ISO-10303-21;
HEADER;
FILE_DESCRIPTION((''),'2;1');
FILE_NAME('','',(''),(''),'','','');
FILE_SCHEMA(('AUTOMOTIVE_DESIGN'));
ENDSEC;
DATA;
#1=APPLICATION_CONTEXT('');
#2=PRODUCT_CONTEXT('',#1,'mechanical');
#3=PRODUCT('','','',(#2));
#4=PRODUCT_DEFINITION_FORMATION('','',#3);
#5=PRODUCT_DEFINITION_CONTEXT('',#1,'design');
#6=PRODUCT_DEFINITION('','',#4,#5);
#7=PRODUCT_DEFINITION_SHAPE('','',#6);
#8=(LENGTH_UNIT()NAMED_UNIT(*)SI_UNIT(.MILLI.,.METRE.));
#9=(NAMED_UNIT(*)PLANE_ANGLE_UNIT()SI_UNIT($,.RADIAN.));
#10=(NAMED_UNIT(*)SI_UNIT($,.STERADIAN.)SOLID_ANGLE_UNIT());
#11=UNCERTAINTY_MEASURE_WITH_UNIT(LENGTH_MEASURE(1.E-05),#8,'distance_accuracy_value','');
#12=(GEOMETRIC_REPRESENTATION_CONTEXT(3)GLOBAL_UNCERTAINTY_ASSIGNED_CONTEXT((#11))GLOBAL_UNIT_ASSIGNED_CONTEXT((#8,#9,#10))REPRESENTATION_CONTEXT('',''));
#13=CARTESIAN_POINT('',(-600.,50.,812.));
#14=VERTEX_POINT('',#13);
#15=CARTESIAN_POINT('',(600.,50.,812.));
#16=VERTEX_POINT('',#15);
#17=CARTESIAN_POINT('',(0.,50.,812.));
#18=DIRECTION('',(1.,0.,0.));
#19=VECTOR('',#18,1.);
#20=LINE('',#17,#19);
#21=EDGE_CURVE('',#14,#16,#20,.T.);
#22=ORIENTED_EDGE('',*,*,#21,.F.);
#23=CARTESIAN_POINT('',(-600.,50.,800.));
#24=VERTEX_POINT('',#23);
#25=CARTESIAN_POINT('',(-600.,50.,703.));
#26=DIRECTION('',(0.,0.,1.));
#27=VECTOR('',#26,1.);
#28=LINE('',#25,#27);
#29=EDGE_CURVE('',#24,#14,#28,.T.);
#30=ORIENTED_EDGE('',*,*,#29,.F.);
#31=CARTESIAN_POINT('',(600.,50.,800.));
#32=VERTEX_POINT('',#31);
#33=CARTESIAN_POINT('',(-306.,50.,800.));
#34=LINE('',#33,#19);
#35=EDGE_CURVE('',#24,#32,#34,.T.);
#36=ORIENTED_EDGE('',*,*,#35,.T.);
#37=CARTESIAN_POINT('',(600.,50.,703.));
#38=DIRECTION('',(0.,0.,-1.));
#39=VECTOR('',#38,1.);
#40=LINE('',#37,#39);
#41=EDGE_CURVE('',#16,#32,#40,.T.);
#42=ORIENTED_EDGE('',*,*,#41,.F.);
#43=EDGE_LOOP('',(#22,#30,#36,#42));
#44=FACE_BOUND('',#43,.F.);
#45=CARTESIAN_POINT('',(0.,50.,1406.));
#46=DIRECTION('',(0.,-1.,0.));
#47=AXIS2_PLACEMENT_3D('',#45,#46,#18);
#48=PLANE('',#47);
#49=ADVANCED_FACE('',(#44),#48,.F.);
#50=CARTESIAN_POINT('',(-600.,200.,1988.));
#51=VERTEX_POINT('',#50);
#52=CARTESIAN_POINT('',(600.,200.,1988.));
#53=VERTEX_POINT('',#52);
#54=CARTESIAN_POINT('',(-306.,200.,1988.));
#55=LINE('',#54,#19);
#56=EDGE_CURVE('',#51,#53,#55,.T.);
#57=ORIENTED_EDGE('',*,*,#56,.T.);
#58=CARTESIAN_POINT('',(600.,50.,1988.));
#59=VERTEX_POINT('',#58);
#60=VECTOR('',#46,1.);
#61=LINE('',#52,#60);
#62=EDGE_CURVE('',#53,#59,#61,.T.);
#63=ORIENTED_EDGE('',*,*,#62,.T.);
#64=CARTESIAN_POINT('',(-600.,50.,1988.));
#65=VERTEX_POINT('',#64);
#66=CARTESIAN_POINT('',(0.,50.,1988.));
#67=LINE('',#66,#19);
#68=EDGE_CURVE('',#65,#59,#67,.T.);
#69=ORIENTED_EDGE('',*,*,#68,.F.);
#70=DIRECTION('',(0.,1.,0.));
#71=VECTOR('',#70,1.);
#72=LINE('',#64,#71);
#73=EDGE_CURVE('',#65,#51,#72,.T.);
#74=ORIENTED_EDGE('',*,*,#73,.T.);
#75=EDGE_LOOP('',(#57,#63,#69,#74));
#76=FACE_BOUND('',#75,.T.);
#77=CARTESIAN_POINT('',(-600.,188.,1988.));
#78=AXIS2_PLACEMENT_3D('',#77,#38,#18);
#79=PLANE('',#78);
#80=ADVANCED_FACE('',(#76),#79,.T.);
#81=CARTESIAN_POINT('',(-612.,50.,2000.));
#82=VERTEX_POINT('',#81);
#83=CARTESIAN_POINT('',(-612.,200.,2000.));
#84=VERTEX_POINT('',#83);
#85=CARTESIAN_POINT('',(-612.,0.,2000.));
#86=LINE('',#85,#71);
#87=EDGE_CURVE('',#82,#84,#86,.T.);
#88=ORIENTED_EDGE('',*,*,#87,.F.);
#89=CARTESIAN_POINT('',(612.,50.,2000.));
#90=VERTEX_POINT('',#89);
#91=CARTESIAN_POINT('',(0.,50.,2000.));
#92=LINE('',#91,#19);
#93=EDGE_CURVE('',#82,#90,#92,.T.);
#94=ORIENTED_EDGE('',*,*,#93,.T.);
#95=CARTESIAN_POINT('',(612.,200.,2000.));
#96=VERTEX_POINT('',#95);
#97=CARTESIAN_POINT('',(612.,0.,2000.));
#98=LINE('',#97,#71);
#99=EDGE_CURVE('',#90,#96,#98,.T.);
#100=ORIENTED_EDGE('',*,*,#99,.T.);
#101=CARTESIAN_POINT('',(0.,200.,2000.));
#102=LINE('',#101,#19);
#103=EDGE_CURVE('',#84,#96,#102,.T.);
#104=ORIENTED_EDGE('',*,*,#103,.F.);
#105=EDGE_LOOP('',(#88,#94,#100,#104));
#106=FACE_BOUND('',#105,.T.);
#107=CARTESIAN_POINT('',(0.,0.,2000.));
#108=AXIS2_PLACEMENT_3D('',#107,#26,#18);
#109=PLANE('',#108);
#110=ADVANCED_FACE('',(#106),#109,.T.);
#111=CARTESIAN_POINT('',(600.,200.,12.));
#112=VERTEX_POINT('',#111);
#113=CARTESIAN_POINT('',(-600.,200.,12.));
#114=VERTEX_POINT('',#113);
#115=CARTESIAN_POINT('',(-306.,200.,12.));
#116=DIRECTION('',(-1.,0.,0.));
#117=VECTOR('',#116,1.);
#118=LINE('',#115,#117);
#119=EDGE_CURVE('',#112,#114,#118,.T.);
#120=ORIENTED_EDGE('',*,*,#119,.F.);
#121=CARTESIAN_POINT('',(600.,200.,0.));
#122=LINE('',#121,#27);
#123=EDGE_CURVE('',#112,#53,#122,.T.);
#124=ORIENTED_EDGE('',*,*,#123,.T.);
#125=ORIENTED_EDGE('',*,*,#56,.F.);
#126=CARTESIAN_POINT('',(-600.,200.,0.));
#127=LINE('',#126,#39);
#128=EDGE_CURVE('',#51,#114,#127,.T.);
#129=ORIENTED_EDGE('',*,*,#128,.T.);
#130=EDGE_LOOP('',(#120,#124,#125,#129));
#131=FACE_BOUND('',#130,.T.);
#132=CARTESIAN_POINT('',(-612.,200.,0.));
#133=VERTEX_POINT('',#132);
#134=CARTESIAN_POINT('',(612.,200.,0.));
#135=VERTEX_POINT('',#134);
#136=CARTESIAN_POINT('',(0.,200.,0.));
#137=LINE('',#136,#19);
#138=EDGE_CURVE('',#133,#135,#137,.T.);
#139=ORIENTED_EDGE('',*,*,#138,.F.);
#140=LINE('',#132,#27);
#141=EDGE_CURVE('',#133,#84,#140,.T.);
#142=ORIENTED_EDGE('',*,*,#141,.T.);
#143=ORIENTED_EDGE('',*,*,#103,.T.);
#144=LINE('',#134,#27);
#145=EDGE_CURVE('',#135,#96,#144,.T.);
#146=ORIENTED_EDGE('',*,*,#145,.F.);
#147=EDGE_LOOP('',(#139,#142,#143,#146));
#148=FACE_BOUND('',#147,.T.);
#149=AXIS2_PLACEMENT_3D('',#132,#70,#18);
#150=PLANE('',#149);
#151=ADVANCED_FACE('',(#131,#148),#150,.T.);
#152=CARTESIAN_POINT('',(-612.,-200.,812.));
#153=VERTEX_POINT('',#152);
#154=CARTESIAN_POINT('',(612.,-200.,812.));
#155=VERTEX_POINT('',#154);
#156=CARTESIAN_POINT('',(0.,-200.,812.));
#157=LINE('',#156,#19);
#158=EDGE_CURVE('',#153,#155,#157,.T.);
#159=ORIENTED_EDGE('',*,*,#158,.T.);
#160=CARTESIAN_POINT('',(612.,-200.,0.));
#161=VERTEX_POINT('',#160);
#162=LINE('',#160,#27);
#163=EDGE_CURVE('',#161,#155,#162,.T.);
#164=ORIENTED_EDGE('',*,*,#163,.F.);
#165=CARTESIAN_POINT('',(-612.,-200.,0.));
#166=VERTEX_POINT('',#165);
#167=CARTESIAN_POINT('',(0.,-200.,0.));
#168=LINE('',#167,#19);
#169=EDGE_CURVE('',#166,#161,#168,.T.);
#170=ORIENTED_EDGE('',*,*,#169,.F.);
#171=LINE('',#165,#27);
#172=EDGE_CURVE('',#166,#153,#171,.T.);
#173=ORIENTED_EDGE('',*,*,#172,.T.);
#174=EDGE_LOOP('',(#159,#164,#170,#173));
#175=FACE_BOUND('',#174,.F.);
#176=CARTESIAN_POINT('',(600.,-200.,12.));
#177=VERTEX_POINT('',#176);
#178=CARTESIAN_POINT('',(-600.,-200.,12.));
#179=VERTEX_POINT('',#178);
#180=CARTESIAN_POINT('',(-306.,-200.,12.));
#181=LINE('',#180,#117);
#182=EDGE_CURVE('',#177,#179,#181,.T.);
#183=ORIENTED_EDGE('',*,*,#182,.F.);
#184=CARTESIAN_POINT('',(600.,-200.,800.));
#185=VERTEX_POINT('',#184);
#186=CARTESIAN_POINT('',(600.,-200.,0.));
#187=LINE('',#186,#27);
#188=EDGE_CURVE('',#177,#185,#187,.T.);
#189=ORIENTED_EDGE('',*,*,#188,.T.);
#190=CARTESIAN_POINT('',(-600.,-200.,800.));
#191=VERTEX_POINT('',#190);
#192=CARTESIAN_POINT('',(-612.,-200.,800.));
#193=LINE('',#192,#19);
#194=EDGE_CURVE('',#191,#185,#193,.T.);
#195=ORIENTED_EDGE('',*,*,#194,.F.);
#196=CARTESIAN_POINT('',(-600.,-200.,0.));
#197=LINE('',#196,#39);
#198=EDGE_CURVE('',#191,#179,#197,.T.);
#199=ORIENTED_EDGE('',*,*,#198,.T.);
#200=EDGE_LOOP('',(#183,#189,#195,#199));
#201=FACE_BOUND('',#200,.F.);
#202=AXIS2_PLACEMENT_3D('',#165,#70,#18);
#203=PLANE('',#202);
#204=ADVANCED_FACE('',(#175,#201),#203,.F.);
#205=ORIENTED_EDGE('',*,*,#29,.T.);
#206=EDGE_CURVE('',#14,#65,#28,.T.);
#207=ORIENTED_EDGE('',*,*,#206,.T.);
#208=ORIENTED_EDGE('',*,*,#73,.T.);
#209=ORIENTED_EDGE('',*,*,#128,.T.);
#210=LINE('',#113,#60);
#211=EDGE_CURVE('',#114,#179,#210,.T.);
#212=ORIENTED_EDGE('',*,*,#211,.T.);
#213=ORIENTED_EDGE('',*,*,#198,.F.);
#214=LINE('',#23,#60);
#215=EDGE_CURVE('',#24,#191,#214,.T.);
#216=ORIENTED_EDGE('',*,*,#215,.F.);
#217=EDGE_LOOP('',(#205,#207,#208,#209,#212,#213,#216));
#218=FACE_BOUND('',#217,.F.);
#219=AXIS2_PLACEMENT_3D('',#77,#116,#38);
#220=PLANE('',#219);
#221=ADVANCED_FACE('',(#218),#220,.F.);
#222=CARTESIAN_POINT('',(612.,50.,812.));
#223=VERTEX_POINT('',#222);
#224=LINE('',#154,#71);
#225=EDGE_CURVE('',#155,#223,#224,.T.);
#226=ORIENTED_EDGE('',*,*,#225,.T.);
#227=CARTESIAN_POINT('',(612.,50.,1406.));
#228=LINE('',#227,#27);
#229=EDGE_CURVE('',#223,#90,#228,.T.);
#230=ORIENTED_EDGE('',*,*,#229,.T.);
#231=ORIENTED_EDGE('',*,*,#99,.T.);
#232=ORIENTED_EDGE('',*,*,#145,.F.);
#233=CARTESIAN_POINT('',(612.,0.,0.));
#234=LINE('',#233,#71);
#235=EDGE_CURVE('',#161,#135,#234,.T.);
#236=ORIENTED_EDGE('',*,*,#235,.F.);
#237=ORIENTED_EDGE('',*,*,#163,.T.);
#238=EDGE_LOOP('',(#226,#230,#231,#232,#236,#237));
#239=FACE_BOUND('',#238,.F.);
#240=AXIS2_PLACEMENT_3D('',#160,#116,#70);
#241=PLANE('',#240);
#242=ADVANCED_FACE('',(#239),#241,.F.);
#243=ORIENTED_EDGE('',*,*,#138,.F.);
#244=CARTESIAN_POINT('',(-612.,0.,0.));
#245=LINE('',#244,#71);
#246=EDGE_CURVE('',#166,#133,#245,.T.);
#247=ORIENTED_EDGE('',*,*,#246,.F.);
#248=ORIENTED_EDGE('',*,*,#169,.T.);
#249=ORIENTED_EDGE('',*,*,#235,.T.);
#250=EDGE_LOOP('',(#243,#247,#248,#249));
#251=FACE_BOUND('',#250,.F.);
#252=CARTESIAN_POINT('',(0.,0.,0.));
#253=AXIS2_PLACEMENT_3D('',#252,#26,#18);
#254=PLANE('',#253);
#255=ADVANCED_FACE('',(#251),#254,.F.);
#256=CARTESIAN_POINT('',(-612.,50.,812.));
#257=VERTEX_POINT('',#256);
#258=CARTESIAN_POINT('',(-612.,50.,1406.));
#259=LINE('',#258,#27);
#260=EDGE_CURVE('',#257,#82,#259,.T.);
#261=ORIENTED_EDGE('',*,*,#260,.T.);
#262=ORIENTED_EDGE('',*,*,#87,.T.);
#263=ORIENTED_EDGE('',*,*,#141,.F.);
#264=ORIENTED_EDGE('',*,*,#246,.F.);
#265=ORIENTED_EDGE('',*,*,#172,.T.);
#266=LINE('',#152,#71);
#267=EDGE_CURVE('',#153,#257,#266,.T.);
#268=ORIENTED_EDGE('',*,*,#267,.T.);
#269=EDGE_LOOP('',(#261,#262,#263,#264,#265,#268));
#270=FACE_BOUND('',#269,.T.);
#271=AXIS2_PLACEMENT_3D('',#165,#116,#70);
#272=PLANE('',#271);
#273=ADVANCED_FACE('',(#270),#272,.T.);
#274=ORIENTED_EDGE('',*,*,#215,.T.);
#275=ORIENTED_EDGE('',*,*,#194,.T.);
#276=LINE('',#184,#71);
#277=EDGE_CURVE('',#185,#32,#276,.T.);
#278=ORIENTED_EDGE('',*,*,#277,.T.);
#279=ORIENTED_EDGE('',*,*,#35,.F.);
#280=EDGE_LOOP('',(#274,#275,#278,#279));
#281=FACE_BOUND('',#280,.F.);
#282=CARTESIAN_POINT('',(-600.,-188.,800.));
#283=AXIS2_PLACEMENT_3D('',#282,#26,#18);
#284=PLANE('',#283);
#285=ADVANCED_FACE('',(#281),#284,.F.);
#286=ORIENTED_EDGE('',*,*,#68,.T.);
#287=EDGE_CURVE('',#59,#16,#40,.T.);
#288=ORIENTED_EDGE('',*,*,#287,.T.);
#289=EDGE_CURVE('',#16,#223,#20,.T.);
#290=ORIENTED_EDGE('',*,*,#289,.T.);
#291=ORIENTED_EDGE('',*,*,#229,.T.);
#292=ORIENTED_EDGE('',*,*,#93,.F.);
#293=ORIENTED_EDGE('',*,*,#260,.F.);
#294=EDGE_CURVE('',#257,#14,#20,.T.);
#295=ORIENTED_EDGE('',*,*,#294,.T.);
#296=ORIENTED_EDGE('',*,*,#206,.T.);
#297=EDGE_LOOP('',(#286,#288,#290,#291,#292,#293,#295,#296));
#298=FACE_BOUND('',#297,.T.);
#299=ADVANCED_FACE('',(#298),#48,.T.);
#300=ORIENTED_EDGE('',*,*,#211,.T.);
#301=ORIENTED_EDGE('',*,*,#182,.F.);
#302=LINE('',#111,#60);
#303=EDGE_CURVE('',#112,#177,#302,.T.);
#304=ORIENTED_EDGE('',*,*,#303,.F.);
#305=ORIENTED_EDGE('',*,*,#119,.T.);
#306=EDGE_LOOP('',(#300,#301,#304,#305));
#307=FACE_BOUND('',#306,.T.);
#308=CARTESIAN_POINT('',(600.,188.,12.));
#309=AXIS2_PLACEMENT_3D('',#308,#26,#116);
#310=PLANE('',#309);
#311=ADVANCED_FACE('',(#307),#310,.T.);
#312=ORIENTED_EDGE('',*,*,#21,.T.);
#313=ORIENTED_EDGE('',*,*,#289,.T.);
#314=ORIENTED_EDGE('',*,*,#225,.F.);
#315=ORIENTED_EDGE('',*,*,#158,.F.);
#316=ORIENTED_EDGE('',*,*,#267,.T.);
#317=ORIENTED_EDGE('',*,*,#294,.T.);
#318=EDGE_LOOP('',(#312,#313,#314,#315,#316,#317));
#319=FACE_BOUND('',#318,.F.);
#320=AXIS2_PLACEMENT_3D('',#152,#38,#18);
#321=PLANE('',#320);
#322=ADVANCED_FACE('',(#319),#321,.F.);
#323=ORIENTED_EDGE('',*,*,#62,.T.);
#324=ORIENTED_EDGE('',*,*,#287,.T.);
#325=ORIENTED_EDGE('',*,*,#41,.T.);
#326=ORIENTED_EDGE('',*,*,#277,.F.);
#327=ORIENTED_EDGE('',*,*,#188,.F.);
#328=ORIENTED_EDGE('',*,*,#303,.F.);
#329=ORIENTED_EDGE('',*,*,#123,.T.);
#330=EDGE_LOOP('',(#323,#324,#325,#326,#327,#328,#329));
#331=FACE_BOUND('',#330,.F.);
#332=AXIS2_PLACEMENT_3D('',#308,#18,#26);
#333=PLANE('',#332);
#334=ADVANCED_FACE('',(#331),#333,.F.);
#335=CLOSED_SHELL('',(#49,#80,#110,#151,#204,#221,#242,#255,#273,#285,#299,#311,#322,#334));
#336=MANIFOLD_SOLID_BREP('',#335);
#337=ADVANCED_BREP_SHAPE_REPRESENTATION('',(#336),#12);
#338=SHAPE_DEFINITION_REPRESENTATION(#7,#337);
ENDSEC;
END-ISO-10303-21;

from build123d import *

# Parameters (mm, degrees)
F0_W     = 1224
F0_H     = 400
F1_DEPTH = 2000
F2_W     = 1224
F2_H     = 1188
F3_DEPTH = 250
F4_T     = -12


# Not quite as in the source:
# - a shell that OpenCascade refuses in one call is made with other operations: the cavity is built on its own and cut out


with BuildPart() as f1:
    # F0 (on Top) → F1 (new body)
    with BuildSketch(Plane.XY):
        Rectangle(F0_W, F0_H)
    extrude(amount=F1_DEPTH)

    # F2 (on face) → F3 (cut)
    with BuildSketch(Plane.XZ.offset(200)):
        with Locations((0, 1406)):
            Rectangle(F2_W, F2_H)
    extrude(amount=-F3_DEPTH, mode=Mode.SUBTRACT)

    # F4: a shell. OpenCascade refuses it in one call, so the cavity is built on its own and cut out:
    # the body offset inwards by the wall thickness, plus a prism from it out through each open face.
    f4_core = offset(f1.part, amount=F4_T, kind=Kind.INTERSECTION, mode=Mode.PRIVATE)
    f4_exits = [f4_core.faces().sort_by_distance(p)[0] for p in [
        (0, 188, 1000),
        (0, 62, 1394),
        (0, -188, 406),
    ]]
    add(f4_core, mode=Mode.SUBTRACT)
    extrude(f4_exits, amount=-F4_T, mode=Mode.SUBTRACT)


solid = f1.part
